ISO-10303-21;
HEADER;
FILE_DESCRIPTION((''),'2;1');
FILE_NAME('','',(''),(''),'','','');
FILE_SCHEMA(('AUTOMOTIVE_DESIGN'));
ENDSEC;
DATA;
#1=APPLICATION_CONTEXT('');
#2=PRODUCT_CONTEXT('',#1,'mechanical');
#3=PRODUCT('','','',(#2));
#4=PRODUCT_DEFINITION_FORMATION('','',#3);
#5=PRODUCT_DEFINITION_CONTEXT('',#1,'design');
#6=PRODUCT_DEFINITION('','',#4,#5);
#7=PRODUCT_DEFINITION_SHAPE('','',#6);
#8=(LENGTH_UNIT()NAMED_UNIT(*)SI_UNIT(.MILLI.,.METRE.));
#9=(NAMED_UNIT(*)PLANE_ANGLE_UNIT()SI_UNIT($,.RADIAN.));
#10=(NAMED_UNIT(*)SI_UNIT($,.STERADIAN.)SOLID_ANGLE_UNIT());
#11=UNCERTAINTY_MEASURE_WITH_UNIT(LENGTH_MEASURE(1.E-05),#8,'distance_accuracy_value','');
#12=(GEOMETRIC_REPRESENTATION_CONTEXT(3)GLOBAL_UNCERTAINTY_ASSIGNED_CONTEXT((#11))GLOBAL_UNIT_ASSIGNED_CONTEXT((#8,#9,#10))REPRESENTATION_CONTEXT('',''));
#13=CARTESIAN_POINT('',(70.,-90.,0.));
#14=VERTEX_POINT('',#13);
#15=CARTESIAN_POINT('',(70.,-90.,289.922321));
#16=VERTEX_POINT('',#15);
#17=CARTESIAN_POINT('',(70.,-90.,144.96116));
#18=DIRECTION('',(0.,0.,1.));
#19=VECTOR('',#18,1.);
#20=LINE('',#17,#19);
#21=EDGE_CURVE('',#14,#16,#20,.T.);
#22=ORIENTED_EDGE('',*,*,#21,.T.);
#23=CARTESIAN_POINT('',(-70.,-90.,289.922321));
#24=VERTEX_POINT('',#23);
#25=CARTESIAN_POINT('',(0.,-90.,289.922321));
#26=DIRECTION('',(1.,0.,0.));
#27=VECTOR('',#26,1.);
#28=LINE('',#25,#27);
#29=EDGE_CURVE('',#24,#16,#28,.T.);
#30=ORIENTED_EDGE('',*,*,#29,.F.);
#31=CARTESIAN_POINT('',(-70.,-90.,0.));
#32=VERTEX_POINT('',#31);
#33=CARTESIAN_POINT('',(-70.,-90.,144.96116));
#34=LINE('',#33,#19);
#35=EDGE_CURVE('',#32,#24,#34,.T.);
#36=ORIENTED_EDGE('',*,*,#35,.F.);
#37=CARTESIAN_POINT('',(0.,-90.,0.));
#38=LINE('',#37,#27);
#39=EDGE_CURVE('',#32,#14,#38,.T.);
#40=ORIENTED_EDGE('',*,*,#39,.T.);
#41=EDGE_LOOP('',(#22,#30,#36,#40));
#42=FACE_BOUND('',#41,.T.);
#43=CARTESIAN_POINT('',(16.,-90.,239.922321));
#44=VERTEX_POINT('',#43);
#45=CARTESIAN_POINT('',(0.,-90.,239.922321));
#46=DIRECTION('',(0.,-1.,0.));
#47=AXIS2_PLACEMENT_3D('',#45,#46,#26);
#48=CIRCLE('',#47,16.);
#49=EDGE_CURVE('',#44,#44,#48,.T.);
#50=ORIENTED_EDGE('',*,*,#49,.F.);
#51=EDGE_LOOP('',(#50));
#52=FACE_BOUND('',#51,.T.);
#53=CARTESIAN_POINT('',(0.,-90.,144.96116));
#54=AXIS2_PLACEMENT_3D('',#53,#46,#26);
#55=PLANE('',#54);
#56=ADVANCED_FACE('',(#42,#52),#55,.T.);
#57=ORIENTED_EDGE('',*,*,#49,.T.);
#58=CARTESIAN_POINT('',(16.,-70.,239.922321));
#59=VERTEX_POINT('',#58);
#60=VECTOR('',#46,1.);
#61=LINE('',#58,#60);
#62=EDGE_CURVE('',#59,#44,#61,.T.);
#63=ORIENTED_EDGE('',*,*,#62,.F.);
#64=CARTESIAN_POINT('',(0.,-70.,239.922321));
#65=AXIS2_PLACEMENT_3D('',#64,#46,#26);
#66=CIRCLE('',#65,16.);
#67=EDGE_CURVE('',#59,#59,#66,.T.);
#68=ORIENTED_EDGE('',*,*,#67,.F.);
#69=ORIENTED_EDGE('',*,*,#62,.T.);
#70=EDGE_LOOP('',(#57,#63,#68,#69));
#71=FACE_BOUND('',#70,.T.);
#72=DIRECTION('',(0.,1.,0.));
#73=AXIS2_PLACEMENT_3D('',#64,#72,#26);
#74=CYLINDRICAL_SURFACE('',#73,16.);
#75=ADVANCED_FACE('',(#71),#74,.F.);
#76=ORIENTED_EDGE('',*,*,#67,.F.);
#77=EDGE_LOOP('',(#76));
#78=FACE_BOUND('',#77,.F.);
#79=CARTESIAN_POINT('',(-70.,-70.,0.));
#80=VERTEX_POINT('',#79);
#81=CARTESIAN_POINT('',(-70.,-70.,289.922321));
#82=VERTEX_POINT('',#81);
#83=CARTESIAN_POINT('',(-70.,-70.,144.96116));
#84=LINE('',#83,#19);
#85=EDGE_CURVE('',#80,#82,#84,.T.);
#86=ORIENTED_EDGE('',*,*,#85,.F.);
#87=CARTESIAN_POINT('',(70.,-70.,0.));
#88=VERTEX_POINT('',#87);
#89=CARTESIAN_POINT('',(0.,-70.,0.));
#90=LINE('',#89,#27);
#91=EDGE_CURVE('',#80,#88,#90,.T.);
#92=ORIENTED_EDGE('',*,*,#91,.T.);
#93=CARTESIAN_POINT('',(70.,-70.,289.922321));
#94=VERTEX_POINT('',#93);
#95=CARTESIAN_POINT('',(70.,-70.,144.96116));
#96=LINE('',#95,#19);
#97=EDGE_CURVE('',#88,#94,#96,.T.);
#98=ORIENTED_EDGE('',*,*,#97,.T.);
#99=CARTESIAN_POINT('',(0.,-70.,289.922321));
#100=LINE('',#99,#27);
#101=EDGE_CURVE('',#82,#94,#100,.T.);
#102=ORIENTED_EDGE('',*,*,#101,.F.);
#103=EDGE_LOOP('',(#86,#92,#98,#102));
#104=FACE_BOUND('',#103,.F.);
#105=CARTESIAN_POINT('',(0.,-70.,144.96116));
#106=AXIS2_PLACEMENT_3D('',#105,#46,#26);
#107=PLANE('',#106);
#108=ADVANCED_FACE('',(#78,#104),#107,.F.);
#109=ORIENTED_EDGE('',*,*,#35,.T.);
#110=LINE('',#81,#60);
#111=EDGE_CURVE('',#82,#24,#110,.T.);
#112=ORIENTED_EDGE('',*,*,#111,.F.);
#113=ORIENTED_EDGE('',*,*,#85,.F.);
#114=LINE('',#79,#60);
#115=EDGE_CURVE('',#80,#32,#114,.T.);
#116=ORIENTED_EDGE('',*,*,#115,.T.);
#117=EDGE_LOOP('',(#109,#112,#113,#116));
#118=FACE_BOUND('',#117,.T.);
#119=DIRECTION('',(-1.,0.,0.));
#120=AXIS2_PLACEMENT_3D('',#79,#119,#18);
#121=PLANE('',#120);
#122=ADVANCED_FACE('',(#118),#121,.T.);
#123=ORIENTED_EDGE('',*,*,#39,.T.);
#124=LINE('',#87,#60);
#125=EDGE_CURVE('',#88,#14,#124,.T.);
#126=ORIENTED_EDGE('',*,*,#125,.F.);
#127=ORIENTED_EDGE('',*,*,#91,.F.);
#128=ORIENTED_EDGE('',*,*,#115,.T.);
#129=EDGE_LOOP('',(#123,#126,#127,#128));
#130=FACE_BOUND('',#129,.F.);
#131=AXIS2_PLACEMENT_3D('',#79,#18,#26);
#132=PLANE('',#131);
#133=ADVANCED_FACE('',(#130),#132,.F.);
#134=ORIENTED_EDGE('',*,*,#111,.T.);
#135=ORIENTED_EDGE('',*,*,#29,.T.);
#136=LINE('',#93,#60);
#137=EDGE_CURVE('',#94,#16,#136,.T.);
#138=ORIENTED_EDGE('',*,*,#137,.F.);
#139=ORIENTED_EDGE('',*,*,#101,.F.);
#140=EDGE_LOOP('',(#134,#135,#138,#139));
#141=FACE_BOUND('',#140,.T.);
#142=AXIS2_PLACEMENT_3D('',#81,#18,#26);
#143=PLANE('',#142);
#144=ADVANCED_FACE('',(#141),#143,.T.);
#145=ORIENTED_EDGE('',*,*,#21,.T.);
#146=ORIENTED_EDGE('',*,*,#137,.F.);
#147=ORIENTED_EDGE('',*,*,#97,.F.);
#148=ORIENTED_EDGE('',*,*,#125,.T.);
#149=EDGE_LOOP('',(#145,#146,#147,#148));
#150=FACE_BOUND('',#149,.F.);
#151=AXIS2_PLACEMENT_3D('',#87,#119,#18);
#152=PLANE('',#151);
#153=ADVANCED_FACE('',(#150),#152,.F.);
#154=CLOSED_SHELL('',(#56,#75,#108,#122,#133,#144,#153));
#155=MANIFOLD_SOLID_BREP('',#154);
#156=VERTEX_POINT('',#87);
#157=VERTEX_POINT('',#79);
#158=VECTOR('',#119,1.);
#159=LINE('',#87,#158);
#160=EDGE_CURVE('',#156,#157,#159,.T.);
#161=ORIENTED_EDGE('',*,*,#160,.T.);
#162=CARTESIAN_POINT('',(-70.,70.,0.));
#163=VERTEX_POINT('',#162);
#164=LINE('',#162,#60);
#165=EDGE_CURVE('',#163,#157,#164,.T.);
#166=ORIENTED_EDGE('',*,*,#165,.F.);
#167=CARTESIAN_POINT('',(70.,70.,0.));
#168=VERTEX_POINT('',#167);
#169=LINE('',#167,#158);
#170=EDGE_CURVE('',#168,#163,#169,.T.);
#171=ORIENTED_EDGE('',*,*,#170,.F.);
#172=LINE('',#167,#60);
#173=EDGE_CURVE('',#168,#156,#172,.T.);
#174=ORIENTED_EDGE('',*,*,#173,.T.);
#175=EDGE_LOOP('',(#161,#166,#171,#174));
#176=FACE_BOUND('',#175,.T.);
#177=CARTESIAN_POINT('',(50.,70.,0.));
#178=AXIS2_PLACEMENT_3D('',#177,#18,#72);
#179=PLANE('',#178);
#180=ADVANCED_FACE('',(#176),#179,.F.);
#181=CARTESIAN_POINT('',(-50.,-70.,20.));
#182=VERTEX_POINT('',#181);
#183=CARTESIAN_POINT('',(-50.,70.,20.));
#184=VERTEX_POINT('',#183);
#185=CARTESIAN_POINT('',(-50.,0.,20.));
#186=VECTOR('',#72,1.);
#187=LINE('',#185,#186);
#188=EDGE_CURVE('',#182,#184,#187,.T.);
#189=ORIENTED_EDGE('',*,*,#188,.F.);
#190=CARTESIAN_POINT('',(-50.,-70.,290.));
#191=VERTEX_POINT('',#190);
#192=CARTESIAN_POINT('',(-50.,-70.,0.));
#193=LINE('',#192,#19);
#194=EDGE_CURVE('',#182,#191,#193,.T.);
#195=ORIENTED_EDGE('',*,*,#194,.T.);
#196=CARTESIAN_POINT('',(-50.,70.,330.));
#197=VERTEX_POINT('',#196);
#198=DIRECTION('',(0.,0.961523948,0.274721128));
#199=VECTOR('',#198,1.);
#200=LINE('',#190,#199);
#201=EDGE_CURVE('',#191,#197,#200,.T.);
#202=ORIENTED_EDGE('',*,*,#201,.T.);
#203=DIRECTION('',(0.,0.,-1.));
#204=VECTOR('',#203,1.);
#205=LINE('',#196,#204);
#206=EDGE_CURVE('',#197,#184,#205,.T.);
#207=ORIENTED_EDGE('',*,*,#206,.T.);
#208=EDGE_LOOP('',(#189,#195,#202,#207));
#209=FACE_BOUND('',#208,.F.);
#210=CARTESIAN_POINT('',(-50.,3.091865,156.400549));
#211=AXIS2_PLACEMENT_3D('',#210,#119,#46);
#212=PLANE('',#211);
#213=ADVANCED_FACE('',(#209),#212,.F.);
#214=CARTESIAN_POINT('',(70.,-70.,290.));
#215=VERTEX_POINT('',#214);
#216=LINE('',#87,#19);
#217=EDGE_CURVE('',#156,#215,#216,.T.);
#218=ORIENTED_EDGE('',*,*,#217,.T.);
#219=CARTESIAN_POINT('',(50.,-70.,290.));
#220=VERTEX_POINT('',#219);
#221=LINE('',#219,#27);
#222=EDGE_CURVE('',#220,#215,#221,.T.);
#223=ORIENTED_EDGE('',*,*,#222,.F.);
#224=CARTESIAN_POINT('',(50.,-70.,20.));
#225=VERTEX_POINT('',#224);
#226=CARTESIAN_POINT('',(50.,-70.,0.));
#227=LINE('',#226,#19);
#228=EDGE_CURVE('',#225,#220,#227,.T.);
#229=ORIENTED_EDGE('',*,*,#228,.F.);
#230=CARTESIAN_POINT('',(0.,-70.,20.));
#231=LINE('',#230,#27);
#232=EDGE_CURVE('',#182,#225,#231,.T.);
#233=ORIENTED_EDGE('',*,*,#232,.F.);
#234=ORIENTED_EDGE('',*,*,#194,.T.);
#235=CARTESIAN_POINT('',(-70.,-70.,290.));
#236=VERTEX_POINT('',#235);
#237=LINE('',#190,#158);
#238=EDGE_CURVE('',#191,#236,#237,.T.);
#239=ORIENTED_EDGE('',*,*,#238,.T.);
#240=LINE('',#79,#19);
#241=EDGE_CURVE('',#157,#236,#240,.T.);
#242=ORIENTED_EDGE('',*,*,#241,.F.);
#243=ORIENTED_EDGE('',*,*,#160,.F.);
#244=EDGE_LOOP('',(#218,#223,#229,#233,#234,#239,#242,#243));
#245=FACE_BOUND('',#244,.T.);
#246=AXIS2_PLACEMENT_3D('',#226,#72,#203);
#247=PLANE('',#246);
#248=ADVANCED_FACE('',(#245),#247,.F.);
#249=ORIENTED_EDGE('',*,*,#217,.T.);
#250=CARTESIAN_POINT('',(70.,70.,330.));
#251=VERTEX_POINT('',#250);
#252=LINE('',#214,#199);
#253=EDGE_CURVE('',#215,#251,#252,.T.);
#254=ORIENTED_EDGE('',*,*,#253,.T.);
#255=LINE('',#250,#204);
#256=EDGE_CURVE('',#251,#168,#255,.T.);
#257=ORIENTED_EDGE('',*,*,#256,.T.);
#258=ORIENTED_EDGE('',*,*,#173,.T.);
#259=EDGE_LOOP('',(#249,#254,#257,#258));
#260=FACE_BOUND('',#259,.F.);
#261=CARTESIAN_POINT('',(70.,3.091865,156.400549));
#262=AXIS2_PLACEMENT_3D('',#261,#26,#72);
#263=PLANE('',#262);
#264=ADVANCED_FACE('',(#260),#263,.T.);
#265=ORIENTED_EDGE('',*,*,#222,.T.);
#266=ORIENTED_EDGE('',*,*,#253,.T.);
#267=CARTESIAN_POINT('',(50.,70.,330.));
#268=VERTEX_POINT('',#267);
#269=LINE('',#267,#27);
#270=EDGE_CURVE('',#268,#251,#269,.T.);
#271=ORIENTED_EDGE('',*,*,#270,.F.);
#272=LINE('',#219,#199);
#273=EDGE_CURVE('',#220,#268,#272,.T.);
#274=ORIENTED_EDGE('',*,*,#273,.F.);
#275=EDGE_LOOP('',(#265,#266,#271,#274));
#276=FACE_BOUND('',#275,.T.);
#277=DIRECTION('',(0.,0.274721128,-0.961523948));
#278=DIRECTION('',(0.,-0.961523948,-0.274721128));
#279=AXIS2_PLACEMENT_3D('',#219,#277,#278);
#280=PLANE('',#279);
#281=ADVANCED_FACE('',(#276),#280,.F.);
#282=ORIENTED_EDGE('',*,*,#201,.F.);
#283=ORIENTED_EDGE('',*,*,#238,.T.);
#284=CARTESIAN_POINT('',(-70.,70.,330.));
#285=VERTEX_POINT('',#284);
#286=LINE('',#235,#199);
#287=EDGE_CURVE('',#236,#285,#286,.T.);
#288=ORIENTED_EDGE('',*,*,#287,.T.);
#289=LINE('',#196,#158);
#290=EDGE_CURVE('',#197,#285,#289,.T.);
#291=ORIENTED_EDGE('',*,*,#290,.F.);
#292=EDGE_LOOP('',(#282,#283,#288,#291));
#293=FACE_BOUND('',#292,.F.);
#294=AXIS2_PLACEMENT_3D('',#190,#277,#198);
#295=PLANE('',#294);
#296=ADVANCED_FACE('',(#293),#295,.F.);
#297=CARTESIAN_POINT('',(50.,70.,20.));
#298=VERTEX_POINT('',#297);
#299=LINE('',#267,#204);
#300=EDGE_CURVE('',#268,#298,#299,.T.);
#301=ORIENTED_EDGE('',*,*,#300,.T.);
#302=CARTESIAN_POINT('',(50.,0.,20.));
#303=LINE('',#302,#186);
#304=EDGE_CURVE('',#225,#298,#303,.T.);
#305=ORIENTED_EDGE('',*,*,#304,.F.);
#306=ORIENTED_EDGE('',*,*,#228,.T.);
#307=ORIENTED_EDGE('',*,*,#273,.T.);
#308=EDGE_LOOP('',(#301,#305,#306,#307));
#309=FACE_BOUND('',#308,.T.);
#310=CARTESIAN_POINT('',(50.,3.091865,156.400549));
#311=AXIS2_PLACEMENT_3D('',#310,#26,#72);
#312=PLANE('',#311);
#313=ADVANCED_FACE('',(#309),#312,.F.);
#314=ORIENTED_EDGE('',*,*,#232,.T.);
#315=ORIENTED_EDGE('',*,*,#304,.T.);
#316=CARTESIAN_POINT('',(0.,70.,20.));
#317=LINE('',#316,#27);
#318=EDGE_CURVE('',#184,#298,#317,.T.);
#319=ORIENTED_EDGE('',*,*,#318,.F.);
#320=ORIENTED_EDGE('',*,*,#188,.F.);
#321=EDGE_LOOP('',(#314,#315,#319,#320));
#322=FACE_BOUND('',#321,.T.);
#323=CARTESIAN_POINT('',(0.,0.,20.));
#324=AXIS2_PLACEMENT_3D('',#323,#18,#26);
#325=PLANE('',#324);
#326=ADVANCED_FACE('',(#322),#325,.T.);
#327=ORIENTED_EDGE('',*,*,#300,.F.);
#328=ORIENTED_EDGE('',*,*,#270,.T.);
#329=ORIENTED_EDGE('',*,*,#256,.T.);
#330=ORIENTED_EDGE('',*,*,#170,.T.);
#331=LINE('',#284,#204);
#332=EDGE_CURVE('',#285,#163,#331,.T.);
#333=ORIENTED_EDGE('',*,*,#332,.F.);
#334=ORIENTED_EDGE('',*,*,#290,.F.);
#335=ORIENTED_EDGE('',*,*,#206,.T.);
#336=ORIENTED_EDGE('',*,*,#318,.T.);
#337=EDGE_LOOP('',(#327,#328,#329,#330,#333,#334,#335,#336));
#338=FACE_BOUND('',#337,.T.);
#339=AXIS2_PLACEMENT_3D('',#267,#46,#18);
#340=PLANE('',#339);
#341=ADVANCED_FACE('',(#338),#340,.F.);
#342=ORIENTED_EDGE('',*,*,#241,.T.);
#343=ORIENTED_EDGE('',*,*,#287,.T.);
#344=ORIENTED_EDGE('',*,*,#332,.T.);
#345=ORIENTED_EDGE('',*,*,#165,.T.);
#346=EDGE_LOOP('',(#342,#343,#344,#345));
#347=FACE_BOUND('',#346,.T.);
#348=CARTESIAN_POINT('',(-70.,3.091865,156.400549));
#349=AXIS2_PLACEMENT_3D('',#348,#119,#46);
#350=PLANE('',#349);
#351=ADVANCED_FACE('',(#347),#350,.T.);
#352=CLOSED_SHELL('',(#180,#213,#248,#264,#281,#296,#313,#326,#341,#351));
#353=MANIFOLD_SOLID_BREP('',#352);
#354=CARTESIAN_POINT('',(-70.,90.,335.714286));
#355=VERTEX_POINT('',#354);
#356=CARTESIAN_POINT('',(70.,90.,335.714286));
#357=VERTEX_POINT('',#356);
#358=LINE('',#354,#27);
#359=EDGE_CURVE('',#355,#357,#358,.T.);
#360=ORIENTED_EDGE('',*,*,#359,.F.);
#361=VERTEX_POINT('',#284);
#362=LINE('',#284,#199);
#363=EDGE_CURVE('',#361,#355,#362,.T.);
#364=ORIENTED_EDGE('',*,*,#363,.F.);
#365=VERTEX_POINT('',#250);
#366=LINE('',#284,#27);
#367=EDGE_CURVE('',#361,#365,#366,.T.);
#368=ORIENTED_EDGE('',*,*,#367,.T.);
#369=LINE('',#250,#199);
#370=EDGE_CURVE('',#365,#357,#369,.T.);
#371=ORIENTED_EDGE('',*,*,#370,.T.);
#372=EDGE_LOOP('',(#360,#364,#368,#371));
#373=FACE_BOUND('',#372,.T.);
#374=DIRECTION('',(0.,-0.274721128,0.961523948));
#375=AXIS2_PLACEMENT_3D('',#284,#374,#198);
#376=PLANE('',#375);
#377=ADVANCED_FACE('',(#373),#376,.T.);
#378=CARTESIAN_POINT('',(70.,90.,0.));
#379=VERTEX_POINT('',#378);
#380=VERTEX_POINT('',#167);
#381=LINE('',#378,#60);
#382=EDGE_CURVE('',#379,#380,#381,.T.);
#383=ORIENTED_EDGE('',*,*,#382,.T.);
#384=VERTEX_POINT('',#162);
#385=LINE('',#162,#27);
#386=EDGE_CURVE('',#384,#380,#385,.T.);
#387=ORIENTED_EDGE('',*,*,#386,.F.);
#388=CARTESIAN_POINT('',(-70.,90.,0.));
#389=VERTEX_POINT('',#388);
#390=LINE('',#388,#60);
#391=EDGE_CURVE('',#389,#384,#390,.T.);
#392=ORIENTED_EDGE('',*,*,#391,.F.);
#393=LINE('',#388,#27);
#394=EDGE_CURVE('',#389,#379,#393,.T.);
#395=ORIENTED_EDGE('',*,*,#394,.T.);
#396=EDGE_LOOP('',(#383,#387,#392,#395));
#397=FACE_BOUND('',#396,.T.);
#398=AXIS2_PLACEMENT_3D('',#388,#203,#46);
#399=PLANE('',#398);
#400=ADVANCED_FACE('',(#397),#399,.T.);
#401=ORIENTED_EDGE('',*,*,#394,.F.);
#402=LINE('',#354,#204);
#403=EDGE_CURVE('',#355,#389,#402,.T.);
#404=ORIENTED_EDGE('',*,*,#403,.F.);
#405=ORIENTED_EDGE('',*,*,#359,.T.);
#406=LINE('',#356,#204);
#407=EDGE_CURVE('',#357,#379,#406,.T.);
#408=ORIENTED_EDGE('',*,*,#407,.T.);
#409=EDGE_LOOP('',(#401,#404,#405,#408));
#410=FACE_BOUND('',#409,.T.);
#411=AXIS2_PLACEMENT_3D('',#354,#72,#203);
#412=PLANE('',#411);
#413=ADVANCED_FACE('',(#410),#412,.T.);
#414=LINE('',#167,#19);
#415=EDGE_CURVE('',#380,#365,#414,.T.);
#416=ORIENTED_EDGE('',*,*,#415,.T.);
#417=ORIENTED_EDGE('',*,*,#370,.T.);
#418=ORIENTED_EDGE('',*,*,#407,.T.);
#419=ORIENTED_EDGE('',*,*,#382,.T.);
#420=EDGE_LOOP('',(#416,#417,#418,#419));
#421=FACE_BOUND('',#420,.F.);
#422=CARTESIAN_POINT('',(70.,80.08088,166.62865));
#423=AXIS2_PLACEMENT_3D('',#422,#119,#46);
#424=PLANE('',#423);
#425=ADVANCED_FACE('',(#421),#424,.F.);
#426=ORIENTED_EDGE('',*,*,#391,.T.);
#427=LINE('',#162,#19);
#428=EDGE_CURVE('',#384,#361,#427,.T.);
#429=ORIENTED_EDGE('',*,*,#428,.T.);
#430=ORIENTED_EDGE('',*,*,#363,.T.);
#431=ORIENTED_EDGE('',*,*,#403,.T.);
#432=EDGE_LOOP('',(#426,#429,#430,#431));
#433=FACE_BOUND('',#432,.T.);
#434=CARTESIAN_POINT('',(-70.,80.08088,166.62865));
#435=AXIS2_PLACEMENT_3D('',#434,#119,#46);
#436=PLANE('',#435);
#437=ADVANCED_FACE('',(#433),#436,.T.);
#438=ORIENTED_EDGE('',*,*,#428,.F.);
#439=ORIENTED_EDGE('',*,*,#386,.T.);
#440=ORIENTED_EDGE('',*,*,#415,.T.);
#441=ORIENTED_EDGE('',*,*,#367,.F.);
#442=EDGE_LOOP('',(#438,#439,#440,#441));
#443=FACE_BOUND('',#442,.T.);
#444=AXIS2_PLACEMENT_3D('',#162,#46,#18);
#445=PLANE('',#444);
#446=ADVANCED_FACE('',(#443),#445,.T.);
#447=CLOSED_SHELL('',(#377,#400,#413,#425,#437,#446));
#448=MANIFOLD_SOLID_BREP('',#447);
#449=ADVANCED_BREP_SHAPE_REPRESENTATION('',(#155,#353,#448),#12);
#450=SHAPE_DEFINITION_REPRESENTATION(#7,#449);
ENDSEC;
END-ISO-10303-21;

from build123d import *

# Parameters (mm, degrees)
F0_W     = 100
F0_H     = 140
F1_DEPTH = 20
F2_W     = 140
F2_H     = 289.9223208091
F2_R     = 16
F3_DEPTH = 20
F5_DEPTH = 20
F8_DEPTH = 140


with BuildPart() as f1:
    # F0 (on Top) → F1 (new body)
    with BuildSketch(Plane.XY):
        Rectangle(F0_W, F0_H)
    extrude(amount=F1_DEPTH)

    # F4 (on face) → F5 (join)
    with BuildSketch(Plane(origin=(-50, 0, 0), x_dir=(0, -1, 0), z_dir=(-1, 0, 0))):
        Polygon((-70, 330), (-70, 0), (70, 0), (70, 290), align=None)
    extrude(amount=F5_DEPTH)

    # F6: F1 across plane


with BuildPart() as f3:
    # F2 (on face) → F3 (new body)
    with BuildSketch(Plane.XZ.offset(70)):
        with Locations((0, 144.9611604046)):
            Rectangle(F2_W, F2_H)
        with Locations((0, 239.9223208091)):
            Circle(F2_R, mode=Mode.SUBTRACT)
    extrude(amount=F3_DEPTH)


with BuildPart() as f1_1:
    add(f1.part)
    add(f1.part.mirror(Plane.YZ))


with BuildPart() as f8:
    # F7 (on face) → F8 (new body)
    with BuildSketch(Plane(origin=(-70, 0, 0), x_dir=(0, -1, 0), z_dir=(-1, 0, 0))):
        Polygon((-70, 0), (-70, 330), (-90, 335.7142857143), (-90, 0), align=None)
    extrude(amount=-F8_DEPTH)


solid = Compound([f3.part, f1_1.part, f8.part])
